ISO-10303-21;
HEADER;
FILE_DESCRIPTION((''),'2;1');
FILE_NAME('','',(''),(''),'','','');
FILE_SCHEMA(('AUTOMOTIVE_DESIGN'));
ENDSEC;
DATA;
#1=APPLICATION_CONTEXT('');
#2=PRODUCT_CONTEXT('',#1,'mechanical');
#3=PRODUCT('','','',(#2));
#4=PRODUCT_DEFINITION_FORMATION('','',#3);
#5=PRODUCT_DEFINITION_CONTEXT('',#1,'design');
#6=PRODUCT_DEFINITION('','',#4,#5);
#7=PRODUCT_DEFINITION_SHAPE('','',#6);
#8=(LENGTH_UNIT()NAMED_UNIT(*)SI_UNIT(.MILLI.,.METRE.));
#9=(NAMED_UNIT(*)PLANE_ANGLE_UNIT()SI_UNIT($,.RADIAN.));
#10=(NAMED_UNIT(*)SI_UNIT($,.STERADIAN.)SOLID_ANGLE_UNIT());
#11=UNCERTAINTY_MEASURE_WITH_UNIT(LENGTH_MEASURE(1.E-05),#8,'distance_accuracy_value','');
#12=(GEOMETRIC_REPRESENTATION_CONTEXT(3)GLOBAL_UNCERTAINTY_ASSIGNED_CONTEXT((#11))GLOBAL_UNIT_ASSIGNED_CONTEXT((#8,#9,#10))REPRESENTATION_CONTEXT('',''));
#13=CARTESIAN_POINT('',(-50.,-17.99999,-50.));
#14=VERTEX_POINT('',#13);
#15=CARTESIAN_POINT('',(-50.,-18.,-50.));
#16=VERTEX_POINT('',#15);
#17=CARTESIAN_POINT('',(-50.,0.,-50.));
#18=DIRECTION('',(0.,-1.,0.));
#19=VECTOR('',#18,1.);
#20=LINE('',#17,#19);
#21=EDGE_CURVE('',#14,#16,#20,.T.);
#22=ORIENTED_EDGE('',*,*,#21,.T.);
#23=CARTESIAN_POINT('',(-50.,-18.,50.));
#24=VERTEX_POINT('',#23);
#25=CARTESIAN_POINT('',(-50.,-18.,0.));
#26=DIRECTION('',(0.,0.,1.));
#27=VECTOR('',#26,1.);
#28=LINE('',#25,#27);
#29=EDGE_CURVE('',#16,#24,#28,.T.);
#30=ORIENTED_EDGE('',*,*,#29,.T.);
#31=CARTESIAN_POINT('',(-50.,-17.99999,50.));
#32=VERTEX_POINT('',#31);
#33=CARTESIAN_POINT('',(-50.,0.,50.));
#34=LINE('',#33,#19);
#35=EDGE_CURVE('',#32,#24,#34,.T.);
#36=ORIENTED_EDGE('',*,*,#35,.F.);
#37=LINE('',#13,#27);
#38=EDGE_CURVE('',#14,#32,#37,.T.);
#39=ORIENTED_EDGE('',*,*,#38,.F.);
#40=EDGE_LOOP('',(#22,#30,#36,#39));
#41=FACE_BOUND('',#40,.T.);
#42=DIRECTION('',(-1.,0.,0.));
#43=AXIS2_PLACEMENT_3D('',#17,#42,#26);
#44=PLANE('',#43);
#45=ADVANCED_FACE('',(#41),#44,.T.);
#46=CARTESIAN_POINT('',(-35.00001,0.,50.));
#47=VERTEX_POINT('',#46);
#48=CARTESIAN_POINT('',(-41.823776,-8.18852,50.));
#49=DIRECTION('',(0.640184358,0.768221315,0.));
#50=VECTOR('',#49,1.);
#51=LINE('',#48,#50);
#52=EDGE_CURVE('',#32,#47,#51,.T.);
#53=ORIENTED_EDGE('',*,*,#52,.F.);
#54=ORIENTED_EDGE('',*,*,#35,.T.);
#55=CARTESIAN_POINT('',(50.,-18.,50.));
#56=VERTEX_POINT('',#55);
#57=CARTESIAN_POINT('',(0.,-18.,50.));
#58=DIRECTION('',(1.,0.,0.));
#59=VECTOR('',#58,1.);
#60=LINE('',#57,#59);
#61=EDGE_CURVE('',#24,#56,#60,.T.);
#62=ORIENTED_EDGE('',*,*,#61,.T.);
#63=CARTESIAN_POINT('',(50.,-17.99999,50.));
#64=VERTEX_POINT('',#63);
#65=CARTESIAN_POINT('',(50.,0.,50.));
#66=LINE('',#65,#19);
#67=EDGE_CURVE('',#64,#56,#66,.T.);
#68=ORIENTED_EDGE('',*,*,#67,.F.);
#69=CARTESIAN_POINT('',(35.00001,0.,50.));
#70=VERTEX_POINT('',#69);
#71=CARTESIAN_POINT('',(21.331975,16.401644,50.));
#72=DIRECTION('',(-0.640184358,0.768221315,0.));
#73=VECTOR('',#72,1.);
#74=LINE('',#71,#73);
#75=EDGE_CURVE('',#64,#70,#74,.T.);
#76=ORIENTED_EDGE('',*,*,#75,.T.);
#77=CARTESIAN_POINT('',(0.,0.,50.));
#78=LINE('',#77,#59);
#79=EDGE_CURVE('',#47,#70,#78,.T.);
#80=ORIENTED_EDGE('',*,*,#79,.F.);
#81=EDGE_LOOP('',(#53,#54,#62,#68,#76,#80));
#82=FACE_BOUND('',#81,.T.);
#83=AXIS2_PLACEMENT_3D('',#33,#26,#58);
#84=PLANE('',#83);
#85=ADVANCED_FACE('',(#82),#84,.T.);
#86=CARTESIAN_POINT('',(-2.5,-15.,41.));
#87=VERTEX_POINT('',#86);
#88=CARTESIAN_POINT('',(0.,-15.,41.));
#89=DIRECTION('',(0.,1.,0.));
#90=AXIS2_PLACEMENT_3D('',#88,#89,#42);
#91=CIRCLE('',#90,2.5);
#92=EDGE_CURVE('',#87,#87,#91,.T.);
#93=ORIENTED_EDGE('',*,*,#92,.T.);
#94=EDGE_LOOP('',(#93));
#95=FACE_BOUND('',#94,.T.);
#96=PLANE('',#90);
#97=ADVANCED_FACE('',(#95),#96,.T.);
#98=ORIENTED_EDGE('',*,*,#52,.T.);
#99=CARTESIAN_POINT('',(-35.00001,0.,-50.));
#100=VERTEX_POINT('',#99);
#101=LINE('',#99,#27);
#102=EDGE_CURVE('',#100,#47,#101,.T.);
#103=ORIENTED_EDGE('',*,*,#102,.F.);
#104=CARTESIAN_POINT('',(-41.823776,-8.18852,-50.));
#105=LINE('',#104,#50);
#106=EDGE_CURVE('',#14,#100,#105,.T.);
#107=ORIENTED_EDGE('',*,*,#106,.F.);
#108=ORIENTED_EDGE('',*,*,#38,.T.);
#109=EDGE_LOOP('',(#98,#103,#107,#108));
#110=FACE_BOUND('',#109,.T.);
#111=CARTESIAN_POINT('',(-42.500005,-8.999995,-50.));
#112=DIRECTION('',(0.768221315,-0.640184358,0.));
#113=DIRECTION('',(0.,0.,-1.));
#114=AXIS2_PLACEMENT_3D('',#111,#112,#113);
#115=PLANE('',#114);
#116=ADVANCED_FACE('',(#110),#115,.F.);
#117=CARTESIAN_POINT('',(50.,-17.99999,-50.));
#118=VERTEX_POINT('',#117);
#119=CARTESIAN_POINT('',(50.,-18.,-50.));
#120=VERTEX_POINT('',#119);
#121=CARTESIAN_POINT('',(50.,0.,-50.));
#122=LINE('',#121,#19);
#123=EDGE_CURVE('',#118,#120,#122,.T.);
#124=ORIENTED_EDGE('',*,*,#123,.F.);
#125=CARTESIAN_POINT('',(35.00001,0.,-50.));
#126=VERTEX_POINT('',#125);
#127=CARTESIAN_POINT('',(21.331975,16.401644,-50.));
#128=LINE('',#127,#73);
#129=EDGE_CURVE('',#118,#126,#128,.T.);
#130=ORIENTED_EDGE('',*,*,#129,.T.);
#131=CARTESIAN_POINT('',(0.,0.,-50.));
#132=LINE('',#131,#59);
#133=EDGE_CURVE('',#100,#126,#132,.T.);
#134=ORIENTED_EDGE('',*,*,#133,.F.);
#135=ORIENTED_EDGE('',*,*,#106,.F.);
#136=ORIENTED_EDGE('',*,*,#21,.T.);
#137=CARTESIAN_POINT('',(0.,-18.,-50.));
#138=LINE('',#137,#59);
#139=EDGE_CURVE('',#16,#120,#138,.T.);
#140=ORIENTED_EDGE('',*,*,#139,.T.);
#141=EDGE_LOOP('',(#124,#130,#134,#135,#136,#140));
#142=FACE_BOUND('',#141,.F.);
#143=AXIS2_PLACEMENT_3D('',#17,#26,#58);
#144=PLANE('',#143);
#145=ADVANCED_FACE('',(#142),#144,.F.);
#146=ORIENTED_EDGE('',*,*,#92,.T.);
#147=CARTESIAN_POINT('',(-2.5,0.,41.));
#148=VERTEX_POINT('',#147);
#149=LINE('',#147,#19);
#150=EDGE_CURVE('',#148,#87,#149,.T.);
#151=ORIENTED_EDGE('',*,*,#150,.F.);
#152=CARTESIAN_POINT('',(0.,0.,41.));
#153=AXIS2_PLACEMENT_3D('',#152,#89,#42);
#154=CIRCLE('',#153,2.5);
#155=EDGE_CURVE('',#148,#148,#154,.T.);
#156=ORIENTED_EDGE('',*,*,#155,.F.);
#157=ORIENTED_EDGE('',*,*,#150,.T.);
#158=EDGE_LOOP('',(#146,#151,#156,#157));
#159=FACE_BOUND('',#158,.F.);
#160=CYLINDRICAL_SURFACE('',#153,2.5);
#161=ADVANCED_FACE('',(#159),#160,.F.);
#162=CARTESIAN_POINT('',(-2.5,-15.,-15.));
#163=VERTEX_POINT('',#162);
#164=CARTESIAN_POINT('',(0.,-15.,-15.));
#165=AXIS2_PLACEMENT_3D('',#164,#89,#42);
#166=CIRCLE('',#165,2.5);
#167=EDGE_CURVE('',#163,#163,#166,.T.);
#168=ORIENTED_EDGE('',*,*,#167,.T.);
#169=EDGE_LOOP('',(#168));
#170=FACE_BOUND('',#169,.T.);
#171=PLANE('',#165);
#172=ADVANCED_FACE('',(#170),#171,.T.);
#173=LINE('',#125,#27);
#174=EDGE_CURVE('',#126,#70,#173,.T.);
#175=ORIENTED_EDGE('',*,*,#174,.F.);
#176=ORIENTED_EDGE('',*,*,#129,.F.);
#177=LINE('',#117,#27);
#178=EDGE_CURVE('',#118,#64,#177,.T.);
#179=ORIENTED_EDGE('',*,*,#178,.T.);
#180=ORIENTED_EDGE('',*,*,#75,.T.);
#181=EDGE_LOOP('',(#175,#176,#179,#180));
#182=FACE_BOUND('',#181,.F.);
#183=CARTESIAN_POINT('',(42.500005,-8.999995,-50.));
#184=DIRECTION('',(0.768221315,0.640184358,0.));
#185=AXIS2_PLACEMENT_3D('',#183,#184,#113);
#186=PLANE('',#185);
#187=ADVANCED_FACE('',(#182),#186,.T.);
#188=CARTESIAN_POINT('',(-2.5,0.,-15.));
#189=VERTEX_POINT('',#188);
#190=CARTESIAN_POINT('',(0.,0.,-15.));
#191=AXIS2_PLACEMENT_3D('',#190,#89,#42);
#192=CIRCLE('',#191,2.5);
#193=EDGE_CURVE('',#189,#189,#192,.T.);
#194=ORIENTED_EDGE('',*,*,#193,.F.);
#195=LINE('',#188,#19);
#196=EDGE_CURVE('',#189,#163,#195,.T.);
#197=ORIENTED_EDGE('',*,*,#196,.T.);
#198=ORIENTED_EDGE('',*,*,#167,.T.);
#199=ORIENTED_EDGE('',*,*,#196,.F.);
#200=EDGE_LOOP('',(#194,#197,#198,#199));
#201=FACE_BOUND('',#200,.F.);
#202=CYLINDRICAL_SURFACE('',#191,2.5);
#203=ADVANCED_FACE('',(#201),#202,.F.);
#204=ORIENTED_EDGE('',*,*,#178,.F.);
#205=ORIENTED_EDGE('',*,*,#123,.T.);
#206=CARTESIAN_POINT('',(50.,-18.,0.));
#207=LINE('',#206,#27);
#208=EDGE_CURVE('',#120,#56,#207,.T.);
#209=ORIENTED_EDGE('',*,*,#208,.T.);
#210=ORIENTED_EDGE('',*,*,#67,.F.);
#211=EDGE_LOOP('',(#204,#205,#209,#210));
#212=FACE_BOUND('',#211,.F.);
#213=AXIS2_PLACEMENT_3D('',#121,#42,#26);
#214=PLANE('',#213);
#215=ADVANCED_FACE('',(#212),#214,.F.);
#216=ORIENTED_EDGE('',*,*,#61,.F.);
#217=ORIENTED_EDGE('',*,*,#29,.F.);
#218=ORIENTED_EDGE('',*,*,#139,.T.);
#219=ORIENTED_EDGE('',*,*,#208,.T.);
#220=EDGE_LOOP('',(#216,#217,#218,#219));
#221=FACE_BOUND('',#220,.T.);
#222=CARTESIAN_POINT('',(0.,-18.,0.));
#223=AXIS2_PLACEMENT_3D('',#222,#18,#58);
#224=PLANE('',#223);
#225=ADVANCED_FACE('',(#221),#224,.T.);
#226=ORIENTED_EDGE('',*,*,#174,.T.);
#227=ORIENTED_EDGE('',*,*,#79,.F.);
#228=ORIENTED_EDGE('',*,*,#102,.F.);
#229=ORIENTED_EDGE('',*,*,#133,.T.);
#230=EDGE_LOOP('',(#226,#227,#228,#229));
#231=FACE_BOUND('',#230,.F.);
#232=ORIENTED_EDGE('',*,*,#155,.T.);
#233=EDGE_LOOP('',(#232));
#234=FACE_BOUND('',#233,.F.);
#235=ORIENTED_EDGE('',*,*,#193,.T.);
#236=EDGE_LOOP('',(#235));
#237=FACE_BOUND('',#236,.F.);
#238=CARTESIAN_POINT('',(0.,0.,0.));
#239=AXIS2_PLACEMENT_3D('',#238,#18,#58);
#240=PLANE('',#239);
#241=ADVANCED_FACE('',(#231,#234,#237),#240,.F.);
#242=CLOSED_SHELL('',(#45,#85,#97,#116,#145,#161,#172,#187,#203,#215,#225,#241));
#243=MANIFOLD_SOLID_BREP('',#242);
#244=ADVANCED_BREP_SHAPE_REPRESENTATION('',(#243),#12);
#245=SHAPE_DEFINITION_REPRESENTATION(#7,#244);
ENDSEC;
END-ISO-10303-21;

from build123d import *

# Parameters (mm, degrees)
F0_W       = 100
F0_H       = 100
F1_DEPTH   = 18
F2_SIZE2   = 14.99999
F2_SIZE    = 17.99999
F2_2_SIZE2 = 14.99999
F2_2_SIZE  = 17.99999
F3_R       = 2.5
F4_DEPTH   = 15


# Not quite as in the source:
# - a fillet or chamfer is up to 0.001 mm smaller than in the source, because OpenCascade refuses the exact size


with BuildPart() as f1:
    # F0 (on Front) → F1 (new body)
    with BuildSketch(Plane.XZ):
        Rectangle(F0_W, F0_H)
    extrude(amount=F1_DEPTH)

    # F2 (size 18 and 15 in the source; OpenCascade refuses exactly that, so slightly less here)
    f2_edges = [f1.edges().sort_by_distance(p)[0] for p in [
        (50, 0, 0),
    ]]
    f2_side = f1.faces().sort_by_distance((50, -9, 0))[0]
    chamfer(f2_edges, length=F2_SIZE, length2=F2_SIZE2, reference=f2_side)

    # F2#2 (size 18 and 15 in the source; OpenCascade refuses exactly that, so slightly less here)
    f2_2_edges = [f1.edges().sort_by_distance(p)[0] for p in [
        (-50, 0, 0),
    ]]
    f2_2_side = f1.faces().sort_by_distance((-50, -9, 0))[0]
    chamfer(f2_2_edges, length=F2_2_SIZE, length2=F2_2_SIZE2, reference=f2_2_side)

    # F3 (on face) → F4 (cut)
    with BuildSketch(Plane(origin=(0, 0, 0), x_dir=(-1, 0, 0), z_dir=(0, 1, 0))):
        with Locations((0, -15)):
            Circle(F3_R)
        with Locations((0, 41)):
            Circle(F3_R)
    extrude(amount=-F4_DEPTH, mode=Mode.SUBTRACT)


solid = f1.part
